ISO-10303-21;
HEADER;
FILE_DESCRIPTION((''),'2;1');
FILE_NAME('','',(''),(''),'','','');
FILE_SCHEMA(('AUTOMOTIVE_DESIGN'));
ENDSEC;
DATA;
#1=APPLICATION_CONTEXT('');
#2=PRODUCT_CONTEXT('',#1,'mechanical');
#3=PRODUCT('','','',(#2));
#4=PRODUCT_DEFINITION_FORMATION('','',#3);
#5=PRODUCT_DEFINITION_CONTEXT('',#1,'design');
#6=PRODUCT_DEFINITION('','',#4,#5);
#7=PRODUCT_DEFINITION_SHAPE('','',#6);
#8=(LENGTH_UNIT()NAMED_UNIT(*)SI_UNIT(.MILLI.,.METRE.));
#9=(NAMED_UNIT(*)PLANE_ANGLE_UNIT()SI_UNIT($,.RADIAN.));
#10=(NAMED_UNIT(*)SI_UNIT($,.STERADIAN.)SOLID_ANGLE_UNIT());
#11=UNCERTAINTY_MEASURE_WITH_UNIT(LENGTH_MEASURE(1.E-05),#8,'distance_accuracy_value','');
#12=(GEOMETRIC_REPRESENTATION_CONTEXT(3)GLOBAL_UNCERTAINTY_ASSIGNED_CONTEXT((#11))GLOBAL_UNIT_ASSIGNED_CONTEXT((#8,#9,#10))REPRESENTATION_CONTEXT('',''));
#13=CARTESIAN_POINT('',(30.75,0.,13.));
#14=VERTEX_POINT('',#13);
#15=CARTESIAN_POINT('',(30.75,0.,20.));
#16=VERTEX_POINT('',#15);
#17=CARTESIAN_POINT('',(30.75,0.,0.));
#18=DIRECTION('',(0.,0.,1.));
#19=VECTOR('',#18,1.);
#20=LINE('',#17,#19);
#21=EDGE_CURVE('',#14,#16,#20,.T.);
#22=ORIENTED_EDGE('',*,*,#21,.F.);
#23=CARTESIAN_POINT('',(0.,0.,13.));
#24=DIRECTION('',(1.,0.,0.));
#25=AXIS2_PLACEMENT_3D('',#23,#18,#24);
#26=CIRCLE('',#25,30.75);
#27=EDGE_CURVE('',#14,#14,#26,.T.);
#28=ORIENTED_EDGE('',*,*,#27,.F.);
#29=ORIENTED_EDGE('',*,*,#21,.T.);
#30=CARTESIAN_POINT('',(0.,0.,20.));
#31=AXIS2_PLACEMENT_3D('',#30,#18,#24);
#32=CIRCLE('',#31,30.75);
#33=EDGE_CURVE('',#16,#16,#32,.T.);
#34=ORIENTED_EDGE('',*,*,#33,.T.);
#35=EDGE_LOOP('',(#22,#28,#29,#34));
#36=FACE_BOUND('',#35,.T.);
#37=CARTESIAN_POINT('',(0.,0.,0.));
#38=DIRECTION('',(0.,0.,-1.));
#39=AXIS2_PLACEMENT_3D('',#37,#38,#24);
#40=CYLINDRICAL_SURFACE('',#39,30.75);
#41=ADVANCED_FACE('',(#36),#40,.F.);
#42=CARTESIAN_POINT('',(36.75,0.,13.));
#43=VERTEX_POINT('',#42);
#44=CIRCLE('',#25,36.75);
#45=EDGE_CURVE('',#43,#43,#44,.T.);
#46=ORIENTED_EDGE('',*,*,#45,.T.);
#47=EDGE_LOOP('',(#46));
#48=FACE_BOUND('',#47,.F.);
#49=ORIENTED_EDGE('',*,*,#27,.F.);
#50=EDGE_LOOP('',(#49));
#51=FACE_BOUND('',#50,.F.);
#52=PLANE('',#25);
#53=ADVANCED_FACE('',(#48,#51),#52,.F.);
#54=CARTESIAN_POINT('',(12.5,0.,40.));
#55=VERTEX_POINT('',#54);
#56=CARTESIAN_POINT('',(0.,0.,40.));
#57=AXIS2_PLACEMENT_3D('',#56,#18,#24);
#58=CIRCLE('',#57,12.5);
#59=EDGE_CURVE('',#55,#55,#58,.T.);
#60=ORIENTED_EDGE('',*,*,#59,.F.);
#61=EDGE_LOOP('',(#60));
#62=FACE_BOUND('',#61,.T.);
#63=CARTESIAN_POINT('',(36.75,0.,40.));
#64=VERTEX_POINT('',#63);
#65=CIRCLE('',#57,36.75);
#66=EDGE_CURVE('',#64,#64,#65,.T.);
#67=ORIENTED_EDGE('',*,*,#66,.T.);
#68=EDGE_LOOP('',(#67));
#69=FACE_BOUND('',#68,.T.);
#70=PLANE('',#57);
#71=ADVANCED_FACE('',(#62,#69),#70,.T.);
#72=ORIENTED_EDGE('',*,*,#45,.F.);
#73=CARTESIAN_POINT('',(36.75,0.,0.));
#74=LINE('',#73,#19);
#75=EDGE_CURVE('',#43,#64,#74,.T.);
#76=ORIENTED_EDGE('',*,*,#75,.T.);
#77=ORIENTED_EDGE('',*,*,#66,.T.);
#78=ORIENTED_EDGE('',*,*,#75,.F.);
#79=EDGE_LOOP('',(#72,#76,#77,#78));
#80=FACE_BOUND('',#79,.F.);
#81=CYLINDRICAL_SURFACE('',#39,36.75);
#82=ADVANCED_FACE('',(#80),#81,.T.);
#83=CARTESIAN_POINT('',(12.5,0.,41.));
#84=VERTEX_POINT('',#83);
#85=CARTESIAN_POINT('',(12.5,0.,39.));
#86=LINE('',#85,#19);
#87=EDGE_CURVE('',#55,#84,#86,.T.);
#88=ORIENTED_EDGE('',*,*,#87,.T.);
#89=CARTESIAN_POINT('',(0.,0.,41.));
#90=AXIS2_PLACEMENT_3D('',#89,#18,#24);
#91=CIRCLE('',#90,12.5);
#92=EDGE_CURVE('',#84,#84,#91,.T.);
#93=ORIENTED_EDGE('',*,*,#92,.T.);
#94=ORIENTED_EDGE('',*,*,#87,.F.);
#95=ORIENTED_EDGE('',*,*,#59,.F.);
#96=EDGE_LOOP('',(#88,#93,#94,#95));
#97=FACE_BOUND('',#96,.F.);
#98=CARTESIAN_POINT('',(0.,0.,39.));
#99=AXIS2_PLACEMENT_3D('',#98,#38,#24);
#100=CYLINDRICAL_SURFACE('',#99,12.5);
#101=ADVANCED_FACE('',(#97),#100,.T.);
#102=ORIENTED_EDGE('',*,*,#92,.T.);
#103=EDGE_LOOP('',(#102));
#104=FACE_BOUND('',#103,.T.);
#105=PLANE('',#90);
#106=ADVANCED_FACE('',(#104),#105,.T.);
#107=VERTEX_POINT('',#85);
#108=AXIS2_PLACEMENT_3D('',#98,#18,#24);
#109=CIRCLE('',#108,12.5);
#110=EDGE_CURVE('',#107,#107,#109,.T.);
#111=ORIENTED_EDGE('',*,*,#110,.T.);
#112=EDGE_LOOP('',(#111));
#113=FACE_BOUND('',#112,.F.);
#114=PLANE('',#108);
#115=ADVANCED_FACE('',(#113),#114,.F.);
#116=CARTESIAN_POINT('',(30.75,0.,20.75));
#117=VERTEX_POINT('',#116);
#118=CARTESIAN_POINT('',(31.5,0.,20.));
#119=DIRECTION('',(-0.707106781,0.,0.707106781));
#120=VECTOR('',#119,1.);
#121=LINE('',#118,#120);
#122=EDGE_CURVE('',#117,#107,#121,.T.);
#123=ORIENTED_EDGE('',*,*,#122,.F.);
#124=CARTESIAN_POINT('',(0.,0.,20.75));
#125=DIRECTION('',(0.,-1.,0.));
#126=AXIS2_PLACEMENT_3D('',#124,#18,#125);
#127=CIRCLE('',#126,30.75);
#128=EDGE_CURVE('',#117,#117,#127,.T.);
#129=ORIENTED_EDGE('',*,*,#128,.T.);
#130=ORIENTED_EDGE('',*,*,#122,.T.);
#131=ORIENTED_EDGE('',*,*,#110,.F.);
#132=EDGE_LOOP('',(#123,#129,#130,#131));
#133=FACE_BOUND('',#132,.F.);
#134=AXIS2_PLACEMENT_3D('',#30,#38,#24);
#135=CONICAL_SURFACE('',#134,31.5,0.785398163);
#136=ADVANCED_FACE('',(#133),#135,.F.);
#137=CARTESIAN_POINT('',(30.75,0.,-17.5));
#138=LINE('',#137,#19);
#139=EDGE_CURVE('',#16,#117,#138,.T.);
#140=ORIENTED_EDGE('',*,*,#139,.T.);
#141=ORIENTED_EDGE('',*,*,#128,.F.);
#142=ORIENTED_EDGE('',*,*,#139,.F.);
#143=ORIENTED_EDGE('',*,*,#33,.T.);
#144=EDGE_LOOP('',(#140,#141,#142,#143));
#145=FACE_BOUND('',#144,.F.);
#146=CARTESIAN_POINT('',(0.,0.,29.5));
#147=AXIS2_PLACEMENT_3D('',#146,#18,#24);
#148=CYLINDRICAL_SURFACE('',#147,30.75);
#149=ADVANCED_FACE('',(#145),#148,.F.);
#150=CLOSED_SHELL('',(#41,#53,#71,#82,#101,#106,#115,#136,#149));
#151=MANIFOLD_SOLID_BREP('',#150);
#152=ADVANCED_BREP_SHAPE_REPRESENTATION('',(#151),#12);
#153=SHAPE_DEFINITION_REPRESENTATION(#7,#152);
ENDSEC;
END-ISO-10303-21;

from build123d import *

# Parameters (mm, degrees)
F0_R        = 36.75
F0_R_2      = 30.75
F1_DEPTH    = 40
F2_START    = 20
F0_R_3      = 12.5
F2_DEPTH    = 20
F3_START    = 39
F3_DEPTH    = 2
F4_S5_R     = 30.75
F4_T6_DEPTH = 47
F5_DEPTH    = 13


# Not quite as in the source:
# - a fillet or chamfer that OpenCascade refuses, or shapes differently, is made with other operations: its cross-section is extruded or revolved along the edge and cut away or added


with BuildPart() as f1:
    # F0 (on Top) → F1 (new body)
    with BuildSketch(Plane.XY):
        Circle(F0_R)
        Circle(F0_R_2, mode=Mode.SUBTRACT)
    extrude(amount=F1_DEPTH)

    # F0 (on Top) → F2 (join)
    with BuildSketch(Plane.XY.offset(F2_START)):
        Circle(F0_R_2)
        Circle(F0_R_3, mode=Mode.SUBTRACT)
    extrude(amount=F2_DEPTH)

    # F0 (on Top) → F3 (join)
    with BuildSketch(Plane.XY.offset(F3_START)):
        Circle(F0_R_3)
    extrude(amount=F3_DEPTH)

    # F4: chamfer of 19 on 1 edges, made by hand


with BuildPart() as f4_tool2:
    # F4_s3 → F4_t4 (revolve)
    with BuildSketch(Plane.XZ):
        Polygon((31.5, 20), (12.5, 39), (12.5, 20), align=None)
    revolve(axis=Axis((0, 0, 20), (0, 0, 1)))

    # F4_s5 → F4_t6 (intersect, symmetric)
    with BuildSketch(Plane.XY.offset(29.5)):
        Circle(F4_S5_R)
    extrude(amount=F4_T6_DEPTH, both=True, mode=Mode.INTERSECT)

    split(bisect_by=Plane.XY.offset(39), keep=Keep.BOTTOM)


with BuildPart() as f1_1:
    add(f1.part)

    # F4_t1: cut F4_tool2
    add(f4_tool2.part, mode=Mode.SUBTRACT)

    # F5 (cut): a face of the model
    f5_faces = [f1_1.faces().sort_by_distance(p)[0] for p in [
        (-35.7105530317, 0, 0),
    ]]
    extrude(f5_faces, amount=-F5_DEPTH, mode=Mode.SUBTRACT)


solid = f1_1.part
